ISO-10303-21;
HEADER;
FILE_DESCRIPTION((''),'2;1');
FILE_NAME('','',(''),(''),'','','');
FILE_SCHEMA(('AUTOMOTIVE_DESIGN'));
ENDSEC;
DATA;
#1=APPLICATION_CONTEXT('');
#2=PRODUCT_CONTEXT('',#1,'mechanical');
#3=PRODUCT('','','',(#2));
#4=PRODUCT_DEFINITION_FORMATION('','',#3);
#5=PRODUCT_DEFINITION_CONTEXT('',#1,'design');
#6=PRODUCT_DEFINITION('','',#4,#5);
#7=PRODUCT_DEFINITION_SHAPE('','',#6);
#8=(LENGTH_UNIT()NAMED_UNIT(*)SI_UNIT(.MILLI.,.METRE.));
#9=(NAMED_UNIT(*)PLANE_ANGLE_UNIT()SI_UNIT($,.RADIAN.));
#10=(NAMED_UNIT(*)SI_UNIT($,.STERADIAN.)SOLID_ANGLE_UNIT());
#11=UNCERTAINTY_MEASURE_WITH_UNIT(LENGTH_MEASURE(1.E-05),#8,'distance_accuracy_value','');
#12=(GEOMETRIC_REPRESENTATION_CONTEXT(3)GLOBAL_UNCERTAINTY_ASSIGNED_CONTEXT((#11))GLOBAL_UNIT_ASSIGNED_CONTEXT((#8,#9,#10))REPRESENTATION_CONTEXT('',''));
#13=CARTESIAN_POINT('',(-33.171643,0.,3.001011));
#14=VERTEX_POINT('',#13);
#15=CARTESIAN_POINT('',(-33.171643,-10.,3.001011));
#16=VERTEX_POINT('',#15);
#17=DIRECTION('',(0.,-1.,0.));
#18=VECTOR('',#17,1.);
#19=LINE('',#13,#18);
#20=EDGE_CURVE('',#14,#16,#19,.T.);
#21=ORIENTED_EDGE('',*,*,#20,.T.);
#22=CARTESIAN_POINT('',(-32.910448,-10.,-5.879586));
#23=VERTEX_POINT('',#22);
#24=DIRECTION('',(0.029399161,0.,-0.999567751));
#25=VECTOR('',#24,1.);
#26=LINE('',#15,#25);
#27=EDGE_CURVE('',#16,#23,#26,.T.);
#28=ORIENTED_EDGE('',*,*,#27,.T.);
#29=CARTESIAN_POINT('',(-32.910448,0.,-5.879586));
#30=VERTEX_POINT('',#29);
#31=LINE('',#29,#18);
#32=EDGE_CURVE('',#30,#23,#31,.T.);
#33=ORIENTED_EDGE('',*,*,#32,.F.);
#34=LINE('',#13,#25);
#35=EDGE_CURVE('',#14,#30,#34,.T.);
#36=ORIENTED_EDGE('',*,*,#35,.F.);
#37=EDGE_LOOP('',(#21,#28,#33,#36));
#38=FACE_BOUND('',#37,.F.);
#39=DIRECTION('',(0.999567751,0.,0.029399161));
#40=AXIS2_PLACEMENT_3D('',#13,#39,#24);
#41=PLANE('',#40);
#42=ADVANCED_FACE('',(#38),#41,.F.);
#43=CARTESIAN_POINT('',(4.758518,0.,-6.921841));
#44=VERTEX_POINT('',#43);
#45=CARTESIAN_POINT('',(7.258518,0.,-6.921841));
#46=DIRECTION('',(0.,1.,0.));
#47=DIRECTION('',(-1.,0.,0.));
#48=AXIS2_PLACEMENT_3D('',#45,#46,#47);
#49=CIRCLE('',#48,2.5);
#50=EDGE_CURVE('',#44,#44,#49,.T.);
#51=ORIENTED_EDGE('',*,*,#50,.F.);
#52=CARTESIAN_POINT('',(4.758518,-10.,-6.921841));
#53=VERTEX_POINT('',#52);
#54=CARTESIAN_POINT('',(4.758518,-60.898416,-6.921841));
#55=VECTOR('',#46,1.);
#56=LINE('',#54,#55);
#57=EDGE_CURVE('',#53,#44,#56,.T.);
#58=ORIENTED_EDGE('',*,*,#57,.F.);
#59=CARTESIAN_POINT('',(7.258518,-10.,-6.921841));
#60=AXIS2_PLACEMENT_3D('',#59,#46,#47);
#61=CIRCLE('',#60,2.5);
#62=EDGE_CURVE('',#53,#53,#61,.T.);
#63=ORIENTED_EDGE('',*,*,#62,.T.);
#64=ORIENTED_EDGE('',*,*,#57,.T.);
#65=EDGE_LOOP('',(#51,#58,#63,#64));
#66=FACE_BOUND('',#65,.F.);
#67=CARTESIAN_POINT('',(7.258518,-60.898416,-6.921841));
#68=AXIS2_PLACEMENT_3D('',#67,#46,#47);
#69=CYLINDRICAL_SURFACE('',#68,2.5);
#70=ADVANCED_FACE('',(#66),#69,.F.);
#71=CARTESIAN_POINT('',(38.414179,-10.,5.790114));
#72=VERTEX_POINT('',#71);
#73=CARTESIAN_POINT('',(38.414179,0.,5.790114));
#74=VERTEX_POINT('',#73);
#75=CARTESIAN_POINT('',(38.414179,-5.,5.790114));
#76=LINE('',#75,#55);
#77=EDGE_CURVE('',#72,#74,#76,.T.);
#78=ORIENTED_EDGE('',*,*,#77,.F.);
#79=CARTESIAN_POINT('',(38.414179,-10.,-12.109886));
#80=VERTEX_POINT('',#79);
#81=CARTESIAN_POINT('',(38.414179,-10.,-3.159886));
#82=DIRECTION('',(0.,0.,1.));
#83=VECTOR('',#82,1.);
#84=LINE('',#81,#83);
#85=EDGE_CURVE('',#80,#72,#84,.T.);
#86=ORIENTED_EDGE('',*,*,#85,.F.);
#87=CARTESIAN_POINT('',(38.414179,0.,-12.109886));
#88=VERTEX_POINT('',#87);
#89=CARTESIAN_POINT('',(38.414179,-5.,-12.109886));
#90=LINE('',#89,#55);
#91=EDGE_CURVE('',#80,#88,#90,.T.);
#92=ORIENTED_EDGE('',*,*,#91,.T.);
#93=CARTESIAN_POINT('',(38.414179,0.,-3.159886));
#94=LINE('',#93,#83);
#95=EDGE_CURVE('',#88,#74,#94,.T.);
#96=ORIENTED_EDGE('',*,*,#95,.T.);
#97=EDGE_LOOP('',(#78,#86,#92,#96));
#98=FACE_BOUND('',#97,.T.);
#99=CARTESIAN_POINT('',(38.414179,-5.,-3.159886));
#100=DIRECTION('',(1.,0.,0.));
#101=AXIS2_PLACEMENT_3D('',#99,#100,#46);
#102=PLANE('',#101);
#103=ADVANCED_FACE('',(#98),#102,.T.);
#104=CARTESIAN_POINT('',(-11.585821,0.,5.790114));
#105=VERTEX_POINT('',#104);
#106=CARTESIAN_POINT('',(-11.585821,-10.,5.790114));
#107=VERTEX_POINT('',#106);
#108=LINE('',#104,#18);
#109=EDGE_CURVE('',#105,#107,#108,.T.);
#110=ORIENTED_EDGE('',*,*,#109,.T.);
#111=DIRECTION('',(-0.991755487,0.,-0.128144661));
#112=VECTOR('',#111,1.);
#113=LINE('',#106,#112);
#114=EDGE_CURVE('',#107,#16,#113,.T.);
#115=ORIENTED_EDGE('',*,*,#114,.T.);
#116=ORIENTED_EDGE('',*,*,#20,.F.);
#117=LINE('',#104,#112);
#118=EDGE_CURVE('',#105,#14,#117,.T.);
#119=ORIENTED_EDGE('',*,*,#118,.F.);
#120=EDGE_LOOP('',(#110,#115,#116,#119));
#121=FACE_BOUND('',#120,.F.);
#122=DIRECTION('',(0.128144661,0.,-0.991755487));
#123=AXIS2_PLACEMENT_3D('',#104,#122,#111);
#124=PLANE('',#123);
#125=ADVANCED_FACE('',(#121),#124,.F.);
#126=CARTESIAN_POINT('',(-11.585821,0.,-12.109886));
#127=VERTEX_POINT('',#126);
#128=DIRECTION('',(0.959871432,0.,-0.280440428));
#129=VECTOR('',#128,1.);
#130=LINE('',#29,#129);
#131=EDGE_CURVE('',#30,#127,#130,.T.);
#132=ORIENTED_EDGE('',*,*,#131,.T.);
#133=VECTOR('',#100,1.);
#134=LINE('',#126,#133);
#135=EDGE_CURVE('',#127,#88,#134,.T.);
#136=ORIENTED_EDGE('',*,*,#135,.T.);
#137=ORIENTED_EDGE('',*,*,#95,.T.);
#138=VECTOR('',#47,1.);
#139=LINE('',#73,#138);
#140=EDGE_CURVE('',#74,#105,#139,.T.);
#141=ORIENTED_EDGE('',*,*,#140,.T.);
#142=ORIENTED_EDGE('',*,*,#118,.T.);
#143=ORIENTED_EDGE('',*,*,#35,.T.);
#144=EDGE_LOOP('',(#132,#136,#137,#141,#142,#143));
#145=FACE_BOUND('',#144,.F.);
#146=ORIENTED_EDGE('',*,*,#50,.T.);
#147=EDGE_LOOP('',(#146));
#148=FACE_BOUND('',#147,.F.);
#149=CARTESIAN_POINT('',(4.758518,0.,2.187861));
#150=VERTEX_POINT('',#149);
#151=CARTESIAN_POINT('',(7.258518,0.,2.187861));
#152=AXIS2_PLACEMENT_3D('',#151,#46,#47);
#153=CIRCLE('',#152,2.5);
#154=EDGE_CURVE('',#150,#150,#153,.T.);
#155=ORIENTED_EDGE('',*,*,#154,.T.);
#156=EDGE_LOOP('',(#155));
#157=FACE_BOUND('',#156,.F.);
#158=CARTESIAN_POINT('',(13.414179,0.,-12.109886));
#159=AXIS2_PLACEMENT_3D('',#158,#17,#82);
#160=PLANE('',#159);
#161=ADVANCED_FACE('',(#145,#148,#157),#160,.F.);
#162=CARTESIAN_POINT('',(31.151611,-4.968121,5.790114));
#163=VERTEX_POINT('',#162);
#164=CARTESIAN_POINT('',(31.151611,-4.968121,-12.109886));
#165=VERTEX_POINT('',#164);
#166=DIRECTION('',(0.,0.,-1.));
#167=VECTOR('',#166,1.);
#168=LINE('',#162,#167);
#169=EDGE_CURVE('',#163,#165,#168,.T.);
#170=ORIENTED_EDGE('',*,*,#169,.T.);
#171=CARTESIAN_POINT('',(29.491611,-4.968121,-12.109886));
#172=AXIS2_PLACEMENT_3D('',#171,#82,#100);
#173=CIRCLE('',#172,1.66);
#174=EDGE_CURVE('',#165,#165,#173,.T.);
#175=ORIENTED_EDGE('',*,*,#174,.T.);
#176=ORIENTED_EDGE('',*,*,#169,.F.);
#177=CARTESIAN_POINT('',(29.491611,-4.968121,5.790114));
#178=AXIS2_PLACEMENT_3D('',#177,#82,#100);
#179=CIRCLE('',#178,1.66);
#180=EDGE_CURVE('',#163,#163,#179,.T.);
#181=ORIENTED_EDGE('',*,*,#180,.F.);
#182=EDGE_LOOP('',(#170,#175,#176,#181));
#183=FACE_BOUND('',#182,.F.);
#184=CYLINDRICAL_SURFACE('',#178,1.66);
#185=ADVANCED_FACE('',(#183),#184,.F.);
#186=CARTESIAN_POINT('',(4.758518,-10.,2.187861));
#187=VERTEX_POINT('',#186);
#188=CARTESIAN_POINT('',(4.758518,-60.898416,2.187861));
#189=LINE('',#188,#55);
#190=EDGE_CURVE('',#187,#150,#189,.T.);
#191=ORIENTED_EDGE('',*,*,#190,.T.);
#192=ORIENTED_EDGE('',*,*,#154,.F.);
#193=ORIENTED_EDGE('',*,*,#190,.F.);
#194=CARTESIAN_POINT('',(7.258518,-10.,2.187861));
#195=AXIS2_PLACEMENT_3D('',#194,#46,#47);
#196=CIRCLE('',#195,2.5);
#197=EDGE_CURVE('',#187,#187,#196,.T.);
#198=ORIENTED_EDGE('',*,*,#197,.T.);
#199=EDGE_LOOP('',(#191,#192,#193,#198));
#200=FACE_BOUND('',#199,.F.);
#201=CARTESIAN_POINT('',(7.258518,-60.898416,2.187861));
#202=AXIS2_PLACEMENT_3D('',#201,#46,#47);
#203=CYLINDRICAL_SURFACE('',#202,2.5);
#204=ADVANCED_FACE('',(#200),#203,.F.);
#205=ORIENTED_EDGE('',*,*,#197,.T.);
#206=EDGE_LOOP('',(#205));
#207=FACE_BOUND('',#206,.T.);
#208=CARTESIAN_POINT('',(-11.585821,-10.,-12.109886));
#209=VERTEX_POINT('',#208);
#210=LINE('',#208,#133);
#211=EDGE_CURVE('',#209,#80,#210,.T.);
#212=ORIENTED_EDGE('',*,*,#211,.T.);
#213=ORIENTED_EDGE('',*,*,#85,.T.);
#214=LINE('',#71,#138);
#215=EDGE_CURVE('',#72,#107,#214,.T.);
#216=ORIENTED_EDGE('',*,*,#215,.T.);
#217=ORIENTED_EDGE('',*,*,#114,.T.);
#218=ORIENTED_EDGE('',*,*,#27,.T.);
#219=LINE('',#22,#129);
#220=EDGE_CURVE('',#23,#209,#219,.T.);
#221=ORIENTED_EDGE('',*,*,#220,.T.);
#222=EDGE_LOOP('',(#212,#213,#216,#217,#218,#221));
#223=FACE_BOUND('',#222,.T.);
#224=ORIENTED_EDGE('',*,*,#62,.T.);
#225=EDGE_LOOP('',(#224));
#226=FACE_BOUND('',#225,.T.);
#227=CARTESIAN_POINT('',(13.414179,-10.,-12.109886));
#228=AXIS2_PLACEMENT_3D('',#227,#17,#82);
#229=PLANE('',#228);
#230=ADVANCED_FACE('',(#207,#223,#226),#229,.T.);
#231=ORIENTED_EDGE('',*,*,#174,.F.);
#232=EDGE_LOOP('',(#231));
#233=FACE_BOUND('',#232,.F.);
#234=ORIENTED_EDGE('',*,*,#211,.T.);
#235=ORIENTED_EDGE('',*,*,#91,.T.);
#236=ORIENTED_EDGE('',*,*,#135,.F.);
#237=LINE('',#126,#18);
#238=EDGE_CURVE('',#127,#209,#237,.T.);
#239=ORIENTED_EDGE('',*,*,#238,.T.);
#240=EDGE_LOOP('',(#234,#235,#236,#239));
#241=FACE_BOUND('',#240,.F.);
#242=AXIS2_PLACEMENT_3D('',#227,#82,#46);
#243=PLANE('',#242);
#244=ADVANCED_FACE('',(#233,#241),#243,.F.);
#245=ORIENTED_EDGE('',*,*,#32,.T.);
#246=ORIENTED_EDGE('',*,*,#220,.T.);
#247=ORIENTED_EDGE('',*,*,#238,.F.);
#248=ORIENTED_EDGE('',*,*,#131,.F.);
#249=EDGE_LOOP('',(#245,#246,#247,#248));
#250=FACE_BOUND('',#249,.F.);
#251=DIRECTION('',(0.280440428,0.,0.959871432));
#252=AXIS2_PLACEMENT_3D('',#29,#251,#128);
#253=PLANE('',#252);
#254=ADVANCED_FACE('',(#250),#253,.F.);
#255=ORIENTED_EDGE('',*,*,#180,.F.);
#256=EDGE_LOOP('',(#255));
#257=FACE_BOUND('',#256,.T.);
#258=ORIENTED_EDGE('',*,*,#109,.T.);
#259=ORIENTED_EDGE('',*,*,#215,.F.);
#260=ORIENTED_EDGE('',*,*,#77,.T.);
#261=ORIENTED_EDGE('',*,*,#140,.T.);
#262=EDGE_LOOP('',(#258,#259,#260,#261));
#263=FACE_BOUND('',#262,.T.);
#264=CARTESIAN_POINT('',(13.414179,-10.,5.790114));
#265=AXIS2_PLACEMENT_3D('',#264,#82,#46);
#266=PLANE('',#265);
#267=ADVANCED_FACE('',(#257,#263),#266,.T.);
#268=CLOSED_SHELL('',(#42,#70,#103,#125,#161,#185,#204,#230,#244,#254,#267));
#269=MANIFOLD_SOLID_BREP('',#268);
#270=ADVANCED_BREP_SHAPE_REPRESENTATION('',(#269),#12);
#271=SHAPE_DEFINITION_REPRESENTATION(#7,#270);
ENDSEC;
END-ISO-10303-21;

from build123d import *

# Parameters (mm, degrees)
F0_W     = 25
F0_H     = 17.9
F1_DEPTH = 10
F3_D     = 5
F4_W     = 10
F4_H     = 17.9
F5_DEPTH = 25
F6_R     = 1.66
F7_DEPTH = 25


# Not quite as in the source:
# - a feature names something its author has since deleted; it is built from what else it names


with BuildPart() as f1:
    # F0 (on Front) → F1 (new body)
    with BuildSketch(Plane.XZ):
        Polygon((-11.5858212113, -12.1098860052), (-11.5858212113, 5.7901139948), (-33.1716425717, 3.0010114424), (-32.9104475677, -5.8795856312), align=None)
        with Locations((0.9141787887, -3.1598860052)):
            Rectangle(F0_W, F0_H)
    extrude(amount=F1_DEPTH)

    # F3 (through all)
    with Locations(Plane.XZ.offset(10)):
        with Locations((7.2585181333, 2.1878613625), (7.2585181333, -6.9218412973)):
            Hole(F3_D / 2)

    # F4 (on face) → F5 (join)
    with BuildSketch(Plane.YZ.offset(13.4141787887)):
        with Locations((-5, -3.1598860052)):
            Rectangle(F4_W, F4_H)
    extrude(amount=F5_DEPTH)

    # F6 (on face) → F7 (cut)
    with BuildSketch(Plane.XY.offset(5.7901139948)):
        with Locations((29.4916108251, -4.9681207165)):
            Circle(F6_R)
    extrude(amount=-F7_DEPTH, mode=Mode.SUBTRACT)


solid = f1.part
